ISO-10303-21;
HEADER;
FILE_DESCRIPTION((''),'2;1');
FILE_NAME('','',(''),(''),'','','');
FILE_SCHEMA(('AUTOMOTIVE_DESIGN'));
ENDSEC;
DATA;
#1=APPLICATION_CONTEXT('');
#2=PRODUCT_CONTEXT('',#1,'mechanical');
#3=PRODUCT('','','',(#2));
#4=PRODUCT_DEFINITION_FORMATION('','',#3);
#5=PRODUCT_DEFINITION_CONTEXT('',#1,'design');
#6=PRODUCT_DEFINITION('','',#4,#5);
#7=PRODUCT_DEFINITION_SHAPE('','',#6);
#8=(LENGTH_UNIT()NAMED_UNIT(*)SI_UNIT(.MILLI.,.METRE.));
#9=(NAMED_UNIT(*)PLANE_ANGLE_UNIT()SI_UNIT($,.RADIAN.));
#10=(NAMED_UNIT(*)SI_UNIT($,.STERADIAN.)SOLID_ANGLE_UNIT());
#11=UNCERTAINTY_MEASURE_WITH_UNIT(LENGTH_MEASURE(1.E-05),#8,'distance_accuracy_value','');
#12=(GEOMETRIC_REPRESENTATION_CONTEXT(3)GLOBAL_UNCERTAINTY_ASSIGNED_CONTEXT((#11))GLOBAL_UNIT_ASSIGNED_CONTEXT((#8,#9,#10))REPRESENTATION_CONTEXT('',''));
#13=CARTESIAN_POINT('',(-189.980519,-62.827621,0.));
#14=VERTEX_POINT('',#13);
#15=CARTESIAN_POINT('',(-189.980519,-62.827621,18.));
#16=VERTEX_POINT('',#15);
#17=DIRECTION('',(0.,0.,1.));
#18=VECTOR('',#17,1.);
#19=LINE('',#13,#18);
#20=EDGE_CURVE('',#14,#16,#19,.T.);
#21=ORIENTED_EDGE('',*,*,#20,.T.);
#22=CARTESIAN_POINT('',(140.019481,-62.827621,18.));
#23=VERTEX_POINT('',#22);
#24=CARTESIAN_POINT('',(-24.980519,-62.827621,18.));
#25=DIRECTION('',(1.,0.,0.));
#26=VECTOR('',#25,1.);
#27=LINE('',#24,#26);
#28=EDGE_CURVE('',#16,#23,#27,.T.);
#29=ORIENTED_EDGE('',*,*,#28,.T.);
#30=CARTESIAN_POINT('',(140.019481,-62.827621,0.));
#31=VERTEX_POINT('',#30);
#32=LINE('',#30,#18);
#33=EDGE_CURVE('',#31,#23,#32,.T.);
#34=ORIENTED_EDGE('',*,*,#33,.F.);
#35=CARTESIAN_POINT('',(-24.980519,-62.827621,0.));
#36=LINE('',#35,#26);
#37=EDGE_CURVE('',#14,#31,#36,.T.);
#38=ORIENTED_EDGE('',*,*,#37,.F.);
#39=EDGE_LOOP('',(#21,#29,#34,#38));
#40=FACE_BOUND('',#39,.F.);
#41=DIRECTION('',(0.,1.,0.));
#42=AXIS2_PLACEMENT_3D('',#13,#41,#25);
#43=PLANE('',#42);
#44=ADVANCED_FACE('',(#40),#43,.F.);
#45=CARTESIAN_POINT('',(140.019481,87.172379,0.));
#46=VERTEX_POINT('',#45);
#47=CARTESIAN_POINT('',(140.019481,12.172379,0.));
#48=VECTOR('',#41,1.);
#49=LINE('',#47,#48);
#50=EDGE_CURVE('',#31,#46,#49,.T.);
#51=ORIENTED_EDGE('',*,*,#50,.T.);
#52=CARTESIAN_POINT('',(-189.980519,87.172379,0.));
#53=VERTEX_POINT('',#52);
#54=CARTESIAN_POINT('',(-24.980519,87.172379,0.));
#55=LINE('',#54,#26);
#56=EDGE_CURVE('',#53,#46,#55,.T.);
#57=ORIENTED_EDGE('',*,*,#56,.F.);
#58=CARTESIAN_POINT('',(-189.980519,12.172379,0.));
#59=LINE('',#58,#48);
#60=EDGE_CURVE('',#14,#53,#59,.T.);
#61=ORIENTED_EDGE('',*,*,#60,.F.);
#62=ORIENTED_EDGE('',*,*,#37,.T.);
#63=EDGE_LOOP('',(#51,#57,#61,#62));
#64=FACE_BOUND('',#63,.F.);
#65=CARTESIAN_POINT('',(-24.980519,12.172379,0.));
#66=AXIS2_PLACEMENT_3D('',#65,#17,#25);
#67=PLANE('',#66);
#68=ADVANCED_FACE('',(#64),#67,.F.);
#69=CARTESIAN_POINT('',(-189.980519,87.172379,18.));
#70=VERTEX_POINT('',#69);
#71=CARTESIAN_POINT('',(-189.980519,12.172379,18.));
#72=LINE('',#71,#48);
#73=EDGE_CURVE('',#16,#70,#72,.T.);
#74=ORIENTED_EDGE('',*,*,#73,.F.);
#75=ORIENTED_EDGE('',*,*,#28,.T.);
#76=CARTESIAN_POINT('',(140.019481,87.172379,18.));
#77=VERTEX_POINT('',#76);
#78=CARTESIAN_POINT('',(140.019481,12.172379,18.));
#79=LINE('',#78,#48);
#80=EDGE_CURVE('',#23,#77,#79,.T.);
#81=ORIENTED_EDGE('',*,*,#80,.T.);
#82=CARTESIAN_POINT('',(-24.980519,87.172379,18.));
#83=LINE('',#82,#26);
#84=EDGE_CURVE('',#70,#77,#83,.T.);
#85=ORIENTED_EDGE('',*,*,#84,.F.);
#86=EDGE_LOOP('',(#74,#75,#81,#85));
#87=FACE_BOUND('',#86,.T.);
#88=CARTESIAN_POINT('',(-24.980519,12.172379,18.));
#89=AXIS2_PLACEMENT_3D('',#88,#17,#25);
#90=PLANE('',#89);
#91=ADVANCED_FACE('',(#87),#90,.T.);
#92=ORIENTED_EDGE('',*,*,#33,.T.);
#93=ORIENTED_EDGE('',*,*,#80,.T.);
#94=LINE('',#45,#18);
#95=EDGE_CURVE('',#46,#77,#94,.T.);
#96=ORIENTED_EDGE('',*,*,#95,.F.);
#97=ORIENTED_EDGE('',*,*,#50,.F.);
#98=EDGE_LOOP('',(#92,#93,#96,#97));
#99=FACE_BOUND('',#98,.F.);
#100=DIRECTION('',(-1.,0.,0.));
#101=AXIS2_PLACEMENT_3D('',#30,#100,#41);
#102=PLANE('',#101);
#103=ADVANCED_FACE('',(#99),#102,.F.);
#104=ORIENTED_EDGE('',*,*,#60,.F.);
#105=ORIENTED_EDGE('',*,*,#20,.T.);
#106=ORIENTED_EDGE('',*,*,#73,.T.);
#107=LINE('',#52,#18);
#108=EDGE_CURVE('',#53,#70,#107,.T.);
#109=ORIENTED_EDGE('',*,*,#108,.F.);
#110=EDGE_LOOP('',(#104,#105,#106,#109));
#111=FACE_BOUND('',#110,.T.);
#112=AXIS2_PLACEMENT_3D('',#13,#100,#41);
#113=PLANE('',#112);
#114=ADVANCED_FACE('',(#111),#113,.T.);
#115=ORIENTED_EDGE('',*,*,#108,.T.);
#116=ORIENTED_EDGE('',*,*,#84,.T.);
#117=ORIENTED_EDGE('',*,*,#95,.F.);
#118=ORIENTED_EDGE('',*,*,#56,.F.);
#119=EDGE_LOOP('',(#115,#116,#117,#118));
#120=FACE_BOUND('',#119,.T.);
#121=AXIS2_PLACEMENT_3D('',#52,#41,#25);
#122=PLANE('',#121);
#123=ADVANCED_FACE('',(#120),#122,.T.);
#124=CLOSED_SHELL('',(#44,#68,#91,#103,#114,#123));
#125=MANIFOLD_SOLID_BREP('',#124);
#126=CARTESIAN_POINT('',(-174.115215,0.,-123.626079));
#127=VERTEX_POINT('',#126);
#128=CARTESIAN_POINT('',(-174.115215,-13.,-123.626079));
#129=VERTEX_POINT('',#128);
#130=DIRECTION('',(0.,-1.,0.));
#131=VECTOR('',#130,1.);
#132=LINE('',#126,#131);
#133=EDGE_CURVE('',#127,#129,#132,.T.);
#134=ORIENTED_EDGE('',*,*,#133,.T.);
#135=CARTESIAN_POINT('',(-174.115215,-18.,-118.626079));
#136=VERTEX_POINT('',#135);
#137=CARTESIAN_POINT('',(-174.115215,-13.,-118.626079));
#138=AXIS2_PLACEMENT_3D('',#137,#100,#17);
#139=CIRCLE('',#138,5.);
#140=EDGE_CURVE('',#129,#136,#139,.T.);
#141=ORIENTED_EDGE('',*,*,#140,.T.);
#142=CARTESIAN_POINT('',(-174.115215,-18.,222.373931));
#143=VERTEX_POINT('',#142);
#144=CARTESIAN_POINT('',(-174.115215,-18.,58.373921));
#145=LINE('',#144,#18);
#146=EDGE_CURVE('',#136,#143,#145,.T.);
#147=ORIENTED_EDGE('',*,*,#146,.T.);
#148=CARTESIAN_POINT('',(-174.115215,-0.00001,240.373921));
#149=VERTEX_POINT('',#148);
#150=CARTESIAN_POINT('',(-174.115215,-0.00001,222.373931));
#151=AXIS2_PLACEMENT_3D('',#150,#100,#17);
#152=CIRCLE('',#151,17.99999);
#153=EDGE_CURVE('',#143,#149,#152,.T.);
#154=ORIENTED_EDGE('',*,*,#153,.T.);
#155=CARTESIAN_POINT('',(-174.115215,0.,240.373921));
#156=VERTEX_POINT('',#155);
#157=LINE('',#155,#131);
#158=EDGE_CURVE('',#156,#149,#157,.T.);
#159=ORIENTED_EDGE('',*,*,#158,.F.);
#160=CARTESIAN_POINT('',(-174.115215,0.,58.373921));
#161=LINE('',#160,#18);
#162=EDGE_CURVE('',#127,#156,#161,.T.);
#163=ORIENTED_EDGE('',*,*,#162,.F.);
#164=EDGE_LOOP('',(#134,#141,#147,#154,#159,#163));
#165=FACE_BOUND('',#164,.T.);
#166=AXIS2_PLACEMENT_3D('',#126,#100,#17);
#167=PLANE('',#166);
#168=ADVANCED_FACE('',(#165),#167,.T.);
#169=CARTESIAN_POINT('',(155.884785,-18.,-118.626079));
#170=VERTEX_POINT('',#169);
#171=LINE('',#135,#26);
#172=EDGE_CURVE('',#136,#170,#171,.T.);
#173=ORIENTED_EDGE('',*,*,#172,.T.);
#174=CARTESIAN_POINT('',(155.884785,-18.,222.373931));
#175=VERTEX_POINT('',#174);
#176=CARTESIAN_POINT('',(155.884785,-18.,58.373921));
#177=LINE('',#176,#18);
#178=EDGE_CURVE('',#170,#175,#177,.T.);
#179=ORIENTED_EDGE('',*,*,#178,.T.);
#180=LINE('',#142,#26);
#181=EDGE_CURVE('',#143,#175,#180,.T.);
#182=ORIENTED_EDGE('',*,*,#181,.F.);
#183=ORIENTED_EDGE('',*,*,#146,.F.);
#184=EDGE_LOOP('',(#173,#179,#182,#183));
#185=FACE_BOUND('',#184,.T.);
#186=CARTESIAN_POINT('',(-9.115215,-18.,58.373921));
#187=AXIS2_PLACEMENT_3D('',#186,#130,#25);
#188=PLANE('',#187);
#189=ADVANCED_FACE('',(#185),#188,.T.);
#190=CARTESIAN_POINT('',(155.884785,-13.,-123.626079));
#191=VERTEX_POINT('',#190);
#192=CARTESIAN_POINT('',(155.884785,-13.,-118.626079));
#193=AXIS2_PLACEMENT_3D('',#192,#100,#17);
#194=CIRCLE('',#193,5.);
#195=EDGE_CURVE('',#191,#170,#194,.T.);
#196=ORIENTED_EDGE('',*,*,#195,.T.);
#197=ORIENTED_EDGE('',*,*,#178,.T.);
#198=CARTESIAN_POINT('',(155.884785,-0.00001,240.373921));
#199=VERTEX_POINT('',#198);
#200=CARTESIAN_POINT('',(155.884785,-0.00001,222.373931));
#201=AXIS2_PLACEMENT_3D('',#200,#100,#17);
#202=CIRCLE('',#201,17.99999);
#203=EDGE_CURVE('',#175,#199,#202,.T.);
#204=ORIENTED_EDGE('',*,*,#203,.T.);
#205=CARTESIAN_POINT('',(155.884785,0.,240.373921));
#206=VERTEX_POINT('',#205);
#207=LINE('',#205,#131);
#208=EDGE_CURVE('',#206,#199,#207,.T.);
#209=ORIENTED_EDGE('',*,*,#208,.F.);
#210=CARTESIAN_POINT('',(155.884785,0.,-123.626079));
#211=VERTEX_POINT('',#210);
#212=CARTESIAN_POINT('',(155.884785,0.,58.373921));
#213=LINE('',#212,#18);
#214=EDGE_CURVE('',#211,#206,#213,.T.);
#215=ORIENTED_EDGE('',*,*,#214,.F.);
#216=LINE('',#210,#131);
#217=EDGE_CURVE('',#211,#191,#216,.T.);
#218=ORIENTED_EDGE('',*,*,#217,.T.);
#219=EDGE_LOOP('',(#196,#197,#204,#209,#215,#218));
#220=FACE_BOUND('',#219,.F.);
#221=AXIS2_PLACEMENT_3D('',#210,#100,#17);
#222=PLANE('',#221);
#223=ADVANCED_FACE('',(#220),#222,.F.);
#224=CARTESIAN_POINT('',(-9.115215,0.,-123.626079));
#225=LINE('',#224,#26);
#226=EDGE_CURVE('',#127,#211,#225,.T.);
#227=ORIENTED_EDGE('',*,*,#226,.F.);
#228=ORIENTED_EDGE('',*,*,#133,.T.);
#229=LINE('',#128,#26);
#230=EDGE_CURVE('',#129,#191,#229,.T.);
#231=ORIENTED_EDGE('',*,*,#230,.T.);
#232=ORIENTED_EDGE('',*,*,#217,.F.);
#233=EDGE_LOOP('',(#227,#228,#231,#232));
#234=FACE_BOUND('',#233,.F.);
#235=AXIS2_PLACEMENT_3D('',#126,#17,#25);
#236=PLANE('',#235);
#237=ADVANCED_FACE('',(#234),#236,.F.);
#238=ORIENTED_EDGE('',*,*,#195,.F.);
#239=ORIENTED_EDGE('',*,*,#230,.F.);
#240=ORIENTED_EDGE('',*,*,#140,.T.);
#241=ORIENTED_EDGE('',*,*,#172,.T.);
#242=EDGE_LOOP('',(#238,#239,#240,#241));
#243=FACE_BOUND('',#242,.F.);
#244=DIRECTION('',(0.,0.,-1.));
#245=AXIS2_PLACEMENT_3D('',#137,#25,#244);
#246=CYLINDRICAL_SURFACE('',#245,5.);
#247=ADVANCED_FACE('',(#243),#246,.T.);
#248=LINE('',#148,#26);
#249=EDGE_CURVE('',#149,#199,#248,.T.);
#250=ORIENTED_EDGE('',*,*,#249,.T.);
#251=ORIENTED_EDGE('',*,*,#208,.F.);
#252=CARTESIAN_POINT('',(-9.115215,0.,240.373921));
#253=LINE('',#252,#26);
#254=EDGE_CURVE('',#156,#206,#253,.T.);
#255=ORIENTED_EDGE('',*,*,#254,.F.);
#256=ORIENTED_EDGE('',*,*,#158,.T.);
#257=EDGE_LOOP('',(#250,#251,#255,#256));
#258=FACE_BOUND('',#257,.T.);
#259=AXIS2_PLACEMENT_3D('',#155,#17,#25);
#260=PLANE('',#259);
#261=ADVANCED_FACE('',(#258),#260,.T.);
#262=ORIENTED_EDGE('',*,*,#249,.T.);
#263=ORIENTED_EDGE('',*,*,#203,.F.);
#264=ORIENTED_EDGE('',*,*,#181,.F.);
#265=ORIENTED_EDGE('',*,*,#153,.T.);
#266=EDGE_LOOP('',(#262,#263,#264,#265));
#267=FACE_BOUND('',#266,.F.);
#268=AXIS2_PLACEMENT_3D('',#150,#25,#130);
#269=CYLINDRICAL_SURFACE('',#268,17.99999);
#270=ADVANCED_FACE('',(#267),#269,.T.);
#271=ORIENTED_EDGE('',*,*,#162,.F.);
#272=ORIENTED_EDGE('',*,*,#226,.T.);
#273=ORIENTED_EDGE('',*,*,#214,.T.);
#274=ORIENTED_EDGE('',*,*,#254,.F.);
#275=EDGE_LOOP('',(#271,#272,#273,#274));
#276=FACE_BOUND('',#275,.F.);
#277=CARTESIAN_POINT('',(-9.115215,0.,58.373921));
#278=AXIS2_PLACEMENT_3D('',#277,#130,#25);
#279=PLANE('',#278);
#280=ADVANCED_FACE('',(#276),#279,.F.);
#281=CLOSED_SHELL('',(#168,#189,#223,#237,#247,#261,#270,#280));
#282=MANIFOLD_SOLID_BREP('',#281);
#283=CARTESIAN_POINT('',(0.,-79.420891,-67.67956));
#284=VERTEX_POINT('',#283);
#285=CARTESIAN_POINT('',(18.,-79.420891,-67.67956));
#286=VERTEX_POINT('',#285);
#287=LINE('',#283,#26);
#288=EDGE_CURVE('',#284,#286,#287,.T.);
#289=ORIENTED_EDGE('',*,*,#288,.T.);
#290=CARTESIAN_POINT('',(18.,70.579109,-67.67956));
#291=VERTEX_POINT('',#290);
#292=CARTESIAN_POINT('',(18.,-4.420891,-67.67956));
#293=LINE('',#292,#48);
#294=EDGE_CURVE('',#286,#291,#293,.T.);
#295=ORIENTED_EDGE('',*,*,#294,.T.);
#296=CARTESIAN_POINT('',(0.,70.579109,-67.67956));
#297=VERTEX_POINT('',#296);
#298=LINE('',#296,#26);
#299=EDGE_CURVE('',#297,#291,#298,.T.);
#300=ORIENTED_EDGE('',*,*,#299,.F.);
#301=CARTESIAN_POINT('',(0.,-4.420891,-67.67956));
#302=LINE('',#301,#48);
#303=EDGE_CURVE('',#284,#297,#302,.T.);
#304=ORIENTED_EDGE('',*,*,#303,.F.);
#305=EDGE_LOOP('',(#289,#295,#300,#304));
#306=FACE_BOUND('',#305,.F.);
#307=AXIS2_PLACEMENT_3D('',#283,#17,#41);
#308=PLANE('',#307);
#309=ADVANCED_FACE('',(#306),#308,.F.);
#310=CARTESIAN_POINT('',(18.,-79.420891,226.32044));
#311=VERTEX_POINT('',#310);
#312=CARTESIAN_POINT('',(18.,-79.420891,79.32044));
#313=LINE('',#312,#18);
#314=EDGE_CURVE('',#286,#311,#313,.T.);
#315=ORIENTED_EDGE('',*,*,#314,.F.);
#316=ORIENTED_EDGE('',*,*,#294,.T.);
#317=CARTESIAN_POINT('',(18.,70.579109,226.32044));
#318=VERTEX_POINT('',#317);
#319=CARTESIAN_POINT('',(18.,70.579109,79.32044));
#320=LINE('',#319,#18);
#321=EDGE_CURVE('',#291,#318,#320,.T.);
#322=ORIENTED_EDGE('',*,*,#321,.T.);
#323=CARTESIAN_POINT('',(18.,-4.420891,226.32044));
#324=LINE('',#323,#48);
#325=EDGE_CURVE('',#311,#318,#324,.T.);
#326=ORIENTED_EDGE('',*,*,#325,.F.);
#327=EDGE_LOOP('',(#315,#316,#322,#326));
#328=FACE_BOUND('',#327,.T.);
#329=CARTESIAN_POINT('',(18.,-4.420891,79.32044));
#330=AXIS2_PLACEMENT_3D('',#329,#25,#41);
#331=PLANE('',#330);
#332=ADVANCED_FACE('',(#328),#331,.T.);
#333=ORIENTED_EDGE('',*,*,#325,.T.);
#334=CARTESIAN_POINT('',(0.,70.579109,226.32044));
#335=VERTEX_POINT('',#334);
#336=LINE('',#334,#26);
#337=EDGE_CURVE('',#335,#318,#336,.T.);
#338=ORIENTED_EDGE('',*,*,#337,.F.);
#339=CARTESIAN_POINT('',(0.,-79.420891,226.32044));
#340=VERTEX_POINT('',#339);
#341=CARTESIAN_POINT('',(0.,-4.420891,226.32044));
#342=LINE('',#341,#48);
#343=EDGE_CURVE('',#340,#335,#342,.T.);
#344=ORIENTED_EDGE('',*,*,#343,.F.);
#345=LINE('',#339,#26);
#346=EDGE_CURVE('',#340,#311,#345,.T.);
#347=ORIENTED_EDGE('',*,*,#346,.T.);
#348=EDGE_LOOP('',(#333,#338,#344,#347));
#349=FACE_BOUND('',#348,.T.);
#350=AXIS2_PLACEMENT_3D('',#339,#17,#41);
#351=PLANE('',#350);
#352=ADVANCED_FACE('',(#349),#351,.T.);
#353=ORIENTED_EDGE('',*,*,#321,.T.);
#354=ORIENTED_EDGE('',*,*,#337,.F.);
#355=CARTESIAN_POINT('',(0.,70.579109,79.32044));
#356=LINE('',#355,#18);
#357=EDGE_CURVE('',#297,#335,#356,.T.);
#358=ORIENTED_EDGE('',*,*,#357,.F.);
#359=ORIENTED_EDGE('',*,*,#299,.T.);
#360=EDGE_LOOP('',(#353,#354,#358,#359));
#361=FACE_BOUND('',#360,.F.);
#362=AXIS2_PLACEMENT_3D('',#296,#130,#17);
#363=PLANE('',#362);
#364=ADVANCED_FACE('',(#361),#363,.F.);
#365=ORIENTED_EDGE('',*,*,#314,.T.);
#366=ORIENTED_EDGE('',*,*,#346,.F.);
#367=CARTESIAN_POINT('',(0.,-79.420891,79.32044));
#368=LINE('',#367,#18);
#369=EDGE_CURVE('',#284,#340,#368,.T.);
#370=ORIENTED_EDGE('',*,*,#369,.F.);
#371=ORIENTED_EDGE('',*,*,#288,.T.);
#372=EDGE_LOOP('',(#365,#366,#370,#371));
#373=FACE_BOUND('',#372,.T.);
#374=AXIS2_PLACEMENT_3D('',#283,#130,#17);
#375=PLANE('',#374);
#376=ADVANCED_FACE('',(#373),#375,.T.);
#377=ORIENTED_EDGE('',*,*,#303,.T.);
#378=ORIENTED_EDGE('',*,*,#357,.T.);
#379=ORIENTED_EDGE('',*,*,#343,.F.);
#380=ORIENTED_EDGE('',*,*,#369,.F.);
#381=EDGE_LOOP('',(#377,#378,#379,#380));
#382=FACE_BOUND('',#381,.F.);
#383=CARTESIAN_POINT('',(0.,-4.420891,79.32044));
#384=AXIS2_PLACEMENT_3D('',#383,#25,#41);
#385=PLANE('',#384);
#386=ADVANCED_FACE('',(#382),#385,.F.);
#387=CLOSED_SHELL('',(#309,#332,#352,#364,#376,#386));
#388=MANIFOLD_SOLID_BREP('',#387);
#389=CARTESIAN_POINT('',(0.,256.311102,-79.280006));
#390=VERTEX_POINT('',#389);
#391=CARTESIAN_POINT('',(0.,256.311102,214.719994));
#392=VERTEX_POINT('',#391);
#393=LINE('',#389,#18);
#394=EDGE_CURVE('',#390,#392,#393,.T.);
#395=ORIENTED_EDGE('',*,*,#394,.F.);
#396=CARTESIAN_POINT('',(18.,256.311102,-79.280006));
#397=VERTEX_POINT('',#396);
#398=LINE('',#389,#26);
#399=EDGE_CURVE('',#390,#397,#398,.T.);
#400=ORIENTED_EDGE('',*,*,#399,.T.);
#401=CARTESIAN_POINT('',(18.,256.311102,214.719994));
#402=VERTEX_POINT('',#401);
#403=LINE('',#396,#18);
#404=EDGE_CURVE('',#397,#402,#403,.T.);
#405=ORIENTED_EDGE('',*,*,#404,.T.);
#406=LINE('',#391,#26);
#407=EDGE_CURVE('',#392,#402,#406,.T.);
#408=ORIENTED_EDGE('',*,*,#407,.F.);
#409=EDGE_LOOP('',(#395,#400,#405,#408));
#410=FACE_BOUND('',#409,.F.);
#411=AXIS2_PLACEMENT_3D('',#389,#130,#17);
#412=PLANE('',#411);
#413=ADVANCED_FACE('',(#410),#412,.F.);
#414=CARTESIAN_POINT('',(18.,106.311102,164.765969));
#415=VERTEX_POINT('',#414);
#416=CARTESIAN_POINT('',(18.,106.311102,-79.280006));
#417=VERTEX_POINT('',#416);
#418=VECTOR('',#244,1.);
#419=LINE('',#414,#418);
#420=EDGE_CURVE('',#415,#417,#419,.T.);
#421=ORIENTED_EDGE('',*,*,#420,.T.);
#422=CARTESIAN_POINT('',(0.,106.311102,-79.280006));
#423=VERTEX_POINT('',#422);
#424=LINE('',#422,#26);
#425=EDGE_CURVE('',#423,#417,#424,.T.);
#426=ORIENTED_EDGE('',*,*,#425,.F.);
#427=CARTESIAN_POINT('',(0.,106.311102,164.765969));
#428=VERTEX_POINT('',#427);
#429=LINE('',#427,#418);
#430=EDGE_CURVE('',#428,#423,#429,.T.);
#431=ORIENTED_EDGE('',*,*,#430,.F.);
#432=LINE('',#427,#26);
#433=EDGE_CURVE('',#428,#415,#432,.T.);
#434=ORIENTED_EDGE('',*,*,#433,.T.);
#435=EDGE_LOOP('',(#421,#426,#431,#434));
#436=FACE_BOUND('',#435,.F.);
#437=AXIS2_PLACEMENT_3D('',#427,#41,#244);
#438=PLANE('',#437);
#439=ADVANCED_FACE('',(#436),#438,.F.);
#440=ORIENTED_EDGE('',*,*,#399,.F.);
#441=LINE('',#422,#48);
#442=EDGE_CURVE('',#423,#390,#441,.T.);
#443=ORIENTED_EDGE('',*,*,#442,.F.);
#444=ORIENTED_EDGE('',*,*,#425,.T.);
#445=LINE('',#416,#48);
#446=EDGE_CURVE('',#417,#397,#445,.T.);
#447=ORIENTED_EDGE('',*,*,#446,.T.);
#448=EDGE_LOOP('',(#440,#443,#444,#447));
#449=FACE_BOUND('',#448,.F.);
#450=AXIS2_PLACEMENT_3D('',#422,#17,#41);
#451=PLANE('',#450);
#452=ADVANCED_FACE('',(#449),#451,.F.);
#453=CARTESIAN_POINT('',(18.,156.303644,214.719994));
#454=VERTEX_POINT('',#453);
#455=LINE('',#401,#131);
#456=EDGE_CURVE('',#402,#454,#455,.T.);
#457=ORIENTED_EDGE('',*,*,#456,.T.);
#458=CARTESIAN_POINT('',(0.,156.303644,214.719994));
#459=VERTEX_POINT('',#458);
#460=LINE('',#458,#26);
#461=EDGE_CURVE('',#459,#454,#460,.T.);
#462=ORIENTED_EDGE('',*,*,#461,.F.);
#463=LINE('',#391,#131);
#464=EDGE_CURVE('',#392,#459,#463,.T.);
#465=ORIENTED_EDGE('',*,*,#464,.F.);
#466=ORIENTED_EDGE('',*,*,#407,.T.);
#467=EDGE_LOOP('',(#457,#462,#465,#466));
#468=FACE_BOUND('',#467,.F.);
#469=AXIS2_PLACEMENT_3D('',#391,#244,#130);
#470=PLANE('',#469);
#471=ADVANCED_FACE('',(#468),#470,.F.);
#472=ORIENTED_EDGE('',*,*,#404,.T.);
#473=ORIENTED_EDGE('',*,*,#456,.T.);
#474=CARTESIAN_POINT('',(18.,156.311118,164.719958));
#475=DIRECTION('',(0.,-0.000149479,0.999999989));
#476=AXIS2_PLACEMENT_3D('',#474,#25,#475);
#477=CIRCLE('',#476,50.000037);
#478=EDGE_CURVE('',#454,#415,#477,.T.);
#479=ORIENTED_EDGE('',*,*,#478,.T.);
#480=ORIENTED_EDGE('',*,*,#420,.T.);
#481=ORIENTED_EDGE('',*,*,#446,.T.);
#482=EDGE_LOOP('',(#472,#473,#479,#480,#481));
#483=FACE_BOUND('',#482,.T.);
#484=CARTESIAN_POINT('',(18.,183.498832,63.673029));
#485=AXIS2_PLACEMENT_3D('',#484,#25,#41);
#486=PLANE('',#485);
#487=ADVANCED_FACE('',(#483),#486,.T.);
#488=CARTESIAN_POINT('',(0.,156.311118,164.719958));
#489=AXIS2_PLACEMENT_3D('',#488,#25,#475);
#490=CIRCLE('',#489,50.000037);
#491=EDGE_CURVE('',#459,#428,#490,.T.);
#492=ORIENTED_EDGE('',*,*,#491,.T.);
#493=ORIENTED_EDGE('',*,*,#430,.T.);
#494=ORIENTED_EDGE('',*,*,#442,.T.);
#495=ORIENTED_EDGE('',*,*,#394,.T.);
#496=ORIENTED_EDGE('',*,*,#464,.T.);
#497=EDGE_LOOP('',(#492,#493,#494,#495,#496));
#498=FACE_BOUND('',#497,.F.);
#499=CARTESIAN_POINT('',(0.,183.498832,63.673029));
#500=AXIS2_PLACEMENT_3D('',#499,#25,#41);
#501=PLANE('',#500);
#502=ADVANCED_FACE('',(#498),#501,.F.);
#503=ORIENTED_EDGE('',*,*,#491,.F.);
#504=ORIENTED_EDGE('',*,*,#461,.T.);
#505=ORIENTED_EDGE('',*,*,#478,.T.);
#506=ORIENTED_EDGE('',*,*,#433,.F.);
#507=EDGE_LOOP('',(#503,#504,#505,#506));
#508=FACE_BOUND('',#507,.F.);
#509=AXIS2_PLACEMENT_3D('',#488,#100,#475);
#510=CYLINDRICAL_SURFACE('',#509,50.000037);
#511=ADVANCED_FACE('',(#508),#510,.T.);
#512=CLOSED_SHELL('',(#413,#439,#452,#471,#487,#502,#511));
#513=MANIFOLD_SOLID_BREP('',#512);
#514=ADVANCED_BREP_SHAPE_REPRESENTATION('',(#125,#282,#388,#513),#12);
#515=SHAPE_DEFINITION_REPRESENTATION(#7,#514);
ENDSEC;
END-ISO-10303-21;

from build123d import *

# Parameters (mm, degrees)
F0_W     = 330
F0_H     = 150
F1_DEPTH = 18
F2_W     = 150
F2_H     = 294
F3_DEPTH = 18
F6_DEPTH = 18
F7_W     = 330
F7_H     = 364
F8_DEPTH = 18
F9_R     = 5
F10_R    = 17.99999


# Not quite as in the source:
# - a fillet or chamfer is up to 0.001 mm smaller than in the source, because OpenCascade refuses the exact size
# - ends of sketch curves that miss each other by under 0.0002 mm in the source are joined


with BuildPart() as f1:
    # F0 (on Top) → F1 (new body)
    with BuildSketch(Plane.XY):
        with Locations((-24.9805187998, 12.1723785996)):
            Rectangle(F0_W, F0_H)
    extrude(amount=F1_DEPTH)


with BuildPart() as f3:
    # F2 (on Right) → F3 (new body)
    with BuildSketch(Plane.YZ):
        with Locations((-4.4208914042, 79.3204397765)):
            Rectangle(F2_W, F2_H)
    extrude(amount=F3_DEPTH)


with BuildPart() as f6:
    # F5 (on face) → F6 (new body)
    with BuildSketch(Plane.YZ):
        with BuildLine():
            Line((106.3111022115, 164.7659689188), (106.3111022115, 164.7199944413))
            Line((106.3111022115, 164.7199944413), (106.3111022115, -79.2800055587))
            Line((106.3111022115, -79.2800055587), (256.3111022115, -79.2800055587))
            Line((256.3111022115, -79.2800055587), (256.3111022115, 214.7199944413))
            Line((256.3111022115, 214.7199944413), (156.3111022115, 214.7199944413))
            Line((156.3111022115, 214.7199944413), (156.3036441803, 214.7199944413))
            ThreePointArc((156.3036441803, 214.7199944413), (120.9693833899, 200.0889484934), (106.3111022115, 164.7659689188))
        make_face()
    extrude(amount=F6_DEPTH)


with BuildPart() as f8:
    # F7 (on Front) → F8 (new body)
    with BuildSketch(Plane.XZ):
        with Locations((-9.1152150415, 58.3739206195)):
            Rectangle(F7_W, F7_H)
    extrude(amount=F8_DEPTH)

    # F9
    f9_edges = [f8.edges().sort_by_distance(p)[0] for p in [
        (-9.115215, -18, -123.626079),
    ]]
    fillet(f9_edges, radius=F9_R)

    # F10 (radius 18 in the source; OpenCascade refuses exactly that, so slightly less here)
    f10_edges = [f8.edges().sort_by_distance(p)[0] for p in [
        (-9.115215, -18, 240.373921),
    ]]
    fillet(f10_edges, radius=F10_R)


solid = Compound([f1.part, f3.part, f6.part, f8.part])
